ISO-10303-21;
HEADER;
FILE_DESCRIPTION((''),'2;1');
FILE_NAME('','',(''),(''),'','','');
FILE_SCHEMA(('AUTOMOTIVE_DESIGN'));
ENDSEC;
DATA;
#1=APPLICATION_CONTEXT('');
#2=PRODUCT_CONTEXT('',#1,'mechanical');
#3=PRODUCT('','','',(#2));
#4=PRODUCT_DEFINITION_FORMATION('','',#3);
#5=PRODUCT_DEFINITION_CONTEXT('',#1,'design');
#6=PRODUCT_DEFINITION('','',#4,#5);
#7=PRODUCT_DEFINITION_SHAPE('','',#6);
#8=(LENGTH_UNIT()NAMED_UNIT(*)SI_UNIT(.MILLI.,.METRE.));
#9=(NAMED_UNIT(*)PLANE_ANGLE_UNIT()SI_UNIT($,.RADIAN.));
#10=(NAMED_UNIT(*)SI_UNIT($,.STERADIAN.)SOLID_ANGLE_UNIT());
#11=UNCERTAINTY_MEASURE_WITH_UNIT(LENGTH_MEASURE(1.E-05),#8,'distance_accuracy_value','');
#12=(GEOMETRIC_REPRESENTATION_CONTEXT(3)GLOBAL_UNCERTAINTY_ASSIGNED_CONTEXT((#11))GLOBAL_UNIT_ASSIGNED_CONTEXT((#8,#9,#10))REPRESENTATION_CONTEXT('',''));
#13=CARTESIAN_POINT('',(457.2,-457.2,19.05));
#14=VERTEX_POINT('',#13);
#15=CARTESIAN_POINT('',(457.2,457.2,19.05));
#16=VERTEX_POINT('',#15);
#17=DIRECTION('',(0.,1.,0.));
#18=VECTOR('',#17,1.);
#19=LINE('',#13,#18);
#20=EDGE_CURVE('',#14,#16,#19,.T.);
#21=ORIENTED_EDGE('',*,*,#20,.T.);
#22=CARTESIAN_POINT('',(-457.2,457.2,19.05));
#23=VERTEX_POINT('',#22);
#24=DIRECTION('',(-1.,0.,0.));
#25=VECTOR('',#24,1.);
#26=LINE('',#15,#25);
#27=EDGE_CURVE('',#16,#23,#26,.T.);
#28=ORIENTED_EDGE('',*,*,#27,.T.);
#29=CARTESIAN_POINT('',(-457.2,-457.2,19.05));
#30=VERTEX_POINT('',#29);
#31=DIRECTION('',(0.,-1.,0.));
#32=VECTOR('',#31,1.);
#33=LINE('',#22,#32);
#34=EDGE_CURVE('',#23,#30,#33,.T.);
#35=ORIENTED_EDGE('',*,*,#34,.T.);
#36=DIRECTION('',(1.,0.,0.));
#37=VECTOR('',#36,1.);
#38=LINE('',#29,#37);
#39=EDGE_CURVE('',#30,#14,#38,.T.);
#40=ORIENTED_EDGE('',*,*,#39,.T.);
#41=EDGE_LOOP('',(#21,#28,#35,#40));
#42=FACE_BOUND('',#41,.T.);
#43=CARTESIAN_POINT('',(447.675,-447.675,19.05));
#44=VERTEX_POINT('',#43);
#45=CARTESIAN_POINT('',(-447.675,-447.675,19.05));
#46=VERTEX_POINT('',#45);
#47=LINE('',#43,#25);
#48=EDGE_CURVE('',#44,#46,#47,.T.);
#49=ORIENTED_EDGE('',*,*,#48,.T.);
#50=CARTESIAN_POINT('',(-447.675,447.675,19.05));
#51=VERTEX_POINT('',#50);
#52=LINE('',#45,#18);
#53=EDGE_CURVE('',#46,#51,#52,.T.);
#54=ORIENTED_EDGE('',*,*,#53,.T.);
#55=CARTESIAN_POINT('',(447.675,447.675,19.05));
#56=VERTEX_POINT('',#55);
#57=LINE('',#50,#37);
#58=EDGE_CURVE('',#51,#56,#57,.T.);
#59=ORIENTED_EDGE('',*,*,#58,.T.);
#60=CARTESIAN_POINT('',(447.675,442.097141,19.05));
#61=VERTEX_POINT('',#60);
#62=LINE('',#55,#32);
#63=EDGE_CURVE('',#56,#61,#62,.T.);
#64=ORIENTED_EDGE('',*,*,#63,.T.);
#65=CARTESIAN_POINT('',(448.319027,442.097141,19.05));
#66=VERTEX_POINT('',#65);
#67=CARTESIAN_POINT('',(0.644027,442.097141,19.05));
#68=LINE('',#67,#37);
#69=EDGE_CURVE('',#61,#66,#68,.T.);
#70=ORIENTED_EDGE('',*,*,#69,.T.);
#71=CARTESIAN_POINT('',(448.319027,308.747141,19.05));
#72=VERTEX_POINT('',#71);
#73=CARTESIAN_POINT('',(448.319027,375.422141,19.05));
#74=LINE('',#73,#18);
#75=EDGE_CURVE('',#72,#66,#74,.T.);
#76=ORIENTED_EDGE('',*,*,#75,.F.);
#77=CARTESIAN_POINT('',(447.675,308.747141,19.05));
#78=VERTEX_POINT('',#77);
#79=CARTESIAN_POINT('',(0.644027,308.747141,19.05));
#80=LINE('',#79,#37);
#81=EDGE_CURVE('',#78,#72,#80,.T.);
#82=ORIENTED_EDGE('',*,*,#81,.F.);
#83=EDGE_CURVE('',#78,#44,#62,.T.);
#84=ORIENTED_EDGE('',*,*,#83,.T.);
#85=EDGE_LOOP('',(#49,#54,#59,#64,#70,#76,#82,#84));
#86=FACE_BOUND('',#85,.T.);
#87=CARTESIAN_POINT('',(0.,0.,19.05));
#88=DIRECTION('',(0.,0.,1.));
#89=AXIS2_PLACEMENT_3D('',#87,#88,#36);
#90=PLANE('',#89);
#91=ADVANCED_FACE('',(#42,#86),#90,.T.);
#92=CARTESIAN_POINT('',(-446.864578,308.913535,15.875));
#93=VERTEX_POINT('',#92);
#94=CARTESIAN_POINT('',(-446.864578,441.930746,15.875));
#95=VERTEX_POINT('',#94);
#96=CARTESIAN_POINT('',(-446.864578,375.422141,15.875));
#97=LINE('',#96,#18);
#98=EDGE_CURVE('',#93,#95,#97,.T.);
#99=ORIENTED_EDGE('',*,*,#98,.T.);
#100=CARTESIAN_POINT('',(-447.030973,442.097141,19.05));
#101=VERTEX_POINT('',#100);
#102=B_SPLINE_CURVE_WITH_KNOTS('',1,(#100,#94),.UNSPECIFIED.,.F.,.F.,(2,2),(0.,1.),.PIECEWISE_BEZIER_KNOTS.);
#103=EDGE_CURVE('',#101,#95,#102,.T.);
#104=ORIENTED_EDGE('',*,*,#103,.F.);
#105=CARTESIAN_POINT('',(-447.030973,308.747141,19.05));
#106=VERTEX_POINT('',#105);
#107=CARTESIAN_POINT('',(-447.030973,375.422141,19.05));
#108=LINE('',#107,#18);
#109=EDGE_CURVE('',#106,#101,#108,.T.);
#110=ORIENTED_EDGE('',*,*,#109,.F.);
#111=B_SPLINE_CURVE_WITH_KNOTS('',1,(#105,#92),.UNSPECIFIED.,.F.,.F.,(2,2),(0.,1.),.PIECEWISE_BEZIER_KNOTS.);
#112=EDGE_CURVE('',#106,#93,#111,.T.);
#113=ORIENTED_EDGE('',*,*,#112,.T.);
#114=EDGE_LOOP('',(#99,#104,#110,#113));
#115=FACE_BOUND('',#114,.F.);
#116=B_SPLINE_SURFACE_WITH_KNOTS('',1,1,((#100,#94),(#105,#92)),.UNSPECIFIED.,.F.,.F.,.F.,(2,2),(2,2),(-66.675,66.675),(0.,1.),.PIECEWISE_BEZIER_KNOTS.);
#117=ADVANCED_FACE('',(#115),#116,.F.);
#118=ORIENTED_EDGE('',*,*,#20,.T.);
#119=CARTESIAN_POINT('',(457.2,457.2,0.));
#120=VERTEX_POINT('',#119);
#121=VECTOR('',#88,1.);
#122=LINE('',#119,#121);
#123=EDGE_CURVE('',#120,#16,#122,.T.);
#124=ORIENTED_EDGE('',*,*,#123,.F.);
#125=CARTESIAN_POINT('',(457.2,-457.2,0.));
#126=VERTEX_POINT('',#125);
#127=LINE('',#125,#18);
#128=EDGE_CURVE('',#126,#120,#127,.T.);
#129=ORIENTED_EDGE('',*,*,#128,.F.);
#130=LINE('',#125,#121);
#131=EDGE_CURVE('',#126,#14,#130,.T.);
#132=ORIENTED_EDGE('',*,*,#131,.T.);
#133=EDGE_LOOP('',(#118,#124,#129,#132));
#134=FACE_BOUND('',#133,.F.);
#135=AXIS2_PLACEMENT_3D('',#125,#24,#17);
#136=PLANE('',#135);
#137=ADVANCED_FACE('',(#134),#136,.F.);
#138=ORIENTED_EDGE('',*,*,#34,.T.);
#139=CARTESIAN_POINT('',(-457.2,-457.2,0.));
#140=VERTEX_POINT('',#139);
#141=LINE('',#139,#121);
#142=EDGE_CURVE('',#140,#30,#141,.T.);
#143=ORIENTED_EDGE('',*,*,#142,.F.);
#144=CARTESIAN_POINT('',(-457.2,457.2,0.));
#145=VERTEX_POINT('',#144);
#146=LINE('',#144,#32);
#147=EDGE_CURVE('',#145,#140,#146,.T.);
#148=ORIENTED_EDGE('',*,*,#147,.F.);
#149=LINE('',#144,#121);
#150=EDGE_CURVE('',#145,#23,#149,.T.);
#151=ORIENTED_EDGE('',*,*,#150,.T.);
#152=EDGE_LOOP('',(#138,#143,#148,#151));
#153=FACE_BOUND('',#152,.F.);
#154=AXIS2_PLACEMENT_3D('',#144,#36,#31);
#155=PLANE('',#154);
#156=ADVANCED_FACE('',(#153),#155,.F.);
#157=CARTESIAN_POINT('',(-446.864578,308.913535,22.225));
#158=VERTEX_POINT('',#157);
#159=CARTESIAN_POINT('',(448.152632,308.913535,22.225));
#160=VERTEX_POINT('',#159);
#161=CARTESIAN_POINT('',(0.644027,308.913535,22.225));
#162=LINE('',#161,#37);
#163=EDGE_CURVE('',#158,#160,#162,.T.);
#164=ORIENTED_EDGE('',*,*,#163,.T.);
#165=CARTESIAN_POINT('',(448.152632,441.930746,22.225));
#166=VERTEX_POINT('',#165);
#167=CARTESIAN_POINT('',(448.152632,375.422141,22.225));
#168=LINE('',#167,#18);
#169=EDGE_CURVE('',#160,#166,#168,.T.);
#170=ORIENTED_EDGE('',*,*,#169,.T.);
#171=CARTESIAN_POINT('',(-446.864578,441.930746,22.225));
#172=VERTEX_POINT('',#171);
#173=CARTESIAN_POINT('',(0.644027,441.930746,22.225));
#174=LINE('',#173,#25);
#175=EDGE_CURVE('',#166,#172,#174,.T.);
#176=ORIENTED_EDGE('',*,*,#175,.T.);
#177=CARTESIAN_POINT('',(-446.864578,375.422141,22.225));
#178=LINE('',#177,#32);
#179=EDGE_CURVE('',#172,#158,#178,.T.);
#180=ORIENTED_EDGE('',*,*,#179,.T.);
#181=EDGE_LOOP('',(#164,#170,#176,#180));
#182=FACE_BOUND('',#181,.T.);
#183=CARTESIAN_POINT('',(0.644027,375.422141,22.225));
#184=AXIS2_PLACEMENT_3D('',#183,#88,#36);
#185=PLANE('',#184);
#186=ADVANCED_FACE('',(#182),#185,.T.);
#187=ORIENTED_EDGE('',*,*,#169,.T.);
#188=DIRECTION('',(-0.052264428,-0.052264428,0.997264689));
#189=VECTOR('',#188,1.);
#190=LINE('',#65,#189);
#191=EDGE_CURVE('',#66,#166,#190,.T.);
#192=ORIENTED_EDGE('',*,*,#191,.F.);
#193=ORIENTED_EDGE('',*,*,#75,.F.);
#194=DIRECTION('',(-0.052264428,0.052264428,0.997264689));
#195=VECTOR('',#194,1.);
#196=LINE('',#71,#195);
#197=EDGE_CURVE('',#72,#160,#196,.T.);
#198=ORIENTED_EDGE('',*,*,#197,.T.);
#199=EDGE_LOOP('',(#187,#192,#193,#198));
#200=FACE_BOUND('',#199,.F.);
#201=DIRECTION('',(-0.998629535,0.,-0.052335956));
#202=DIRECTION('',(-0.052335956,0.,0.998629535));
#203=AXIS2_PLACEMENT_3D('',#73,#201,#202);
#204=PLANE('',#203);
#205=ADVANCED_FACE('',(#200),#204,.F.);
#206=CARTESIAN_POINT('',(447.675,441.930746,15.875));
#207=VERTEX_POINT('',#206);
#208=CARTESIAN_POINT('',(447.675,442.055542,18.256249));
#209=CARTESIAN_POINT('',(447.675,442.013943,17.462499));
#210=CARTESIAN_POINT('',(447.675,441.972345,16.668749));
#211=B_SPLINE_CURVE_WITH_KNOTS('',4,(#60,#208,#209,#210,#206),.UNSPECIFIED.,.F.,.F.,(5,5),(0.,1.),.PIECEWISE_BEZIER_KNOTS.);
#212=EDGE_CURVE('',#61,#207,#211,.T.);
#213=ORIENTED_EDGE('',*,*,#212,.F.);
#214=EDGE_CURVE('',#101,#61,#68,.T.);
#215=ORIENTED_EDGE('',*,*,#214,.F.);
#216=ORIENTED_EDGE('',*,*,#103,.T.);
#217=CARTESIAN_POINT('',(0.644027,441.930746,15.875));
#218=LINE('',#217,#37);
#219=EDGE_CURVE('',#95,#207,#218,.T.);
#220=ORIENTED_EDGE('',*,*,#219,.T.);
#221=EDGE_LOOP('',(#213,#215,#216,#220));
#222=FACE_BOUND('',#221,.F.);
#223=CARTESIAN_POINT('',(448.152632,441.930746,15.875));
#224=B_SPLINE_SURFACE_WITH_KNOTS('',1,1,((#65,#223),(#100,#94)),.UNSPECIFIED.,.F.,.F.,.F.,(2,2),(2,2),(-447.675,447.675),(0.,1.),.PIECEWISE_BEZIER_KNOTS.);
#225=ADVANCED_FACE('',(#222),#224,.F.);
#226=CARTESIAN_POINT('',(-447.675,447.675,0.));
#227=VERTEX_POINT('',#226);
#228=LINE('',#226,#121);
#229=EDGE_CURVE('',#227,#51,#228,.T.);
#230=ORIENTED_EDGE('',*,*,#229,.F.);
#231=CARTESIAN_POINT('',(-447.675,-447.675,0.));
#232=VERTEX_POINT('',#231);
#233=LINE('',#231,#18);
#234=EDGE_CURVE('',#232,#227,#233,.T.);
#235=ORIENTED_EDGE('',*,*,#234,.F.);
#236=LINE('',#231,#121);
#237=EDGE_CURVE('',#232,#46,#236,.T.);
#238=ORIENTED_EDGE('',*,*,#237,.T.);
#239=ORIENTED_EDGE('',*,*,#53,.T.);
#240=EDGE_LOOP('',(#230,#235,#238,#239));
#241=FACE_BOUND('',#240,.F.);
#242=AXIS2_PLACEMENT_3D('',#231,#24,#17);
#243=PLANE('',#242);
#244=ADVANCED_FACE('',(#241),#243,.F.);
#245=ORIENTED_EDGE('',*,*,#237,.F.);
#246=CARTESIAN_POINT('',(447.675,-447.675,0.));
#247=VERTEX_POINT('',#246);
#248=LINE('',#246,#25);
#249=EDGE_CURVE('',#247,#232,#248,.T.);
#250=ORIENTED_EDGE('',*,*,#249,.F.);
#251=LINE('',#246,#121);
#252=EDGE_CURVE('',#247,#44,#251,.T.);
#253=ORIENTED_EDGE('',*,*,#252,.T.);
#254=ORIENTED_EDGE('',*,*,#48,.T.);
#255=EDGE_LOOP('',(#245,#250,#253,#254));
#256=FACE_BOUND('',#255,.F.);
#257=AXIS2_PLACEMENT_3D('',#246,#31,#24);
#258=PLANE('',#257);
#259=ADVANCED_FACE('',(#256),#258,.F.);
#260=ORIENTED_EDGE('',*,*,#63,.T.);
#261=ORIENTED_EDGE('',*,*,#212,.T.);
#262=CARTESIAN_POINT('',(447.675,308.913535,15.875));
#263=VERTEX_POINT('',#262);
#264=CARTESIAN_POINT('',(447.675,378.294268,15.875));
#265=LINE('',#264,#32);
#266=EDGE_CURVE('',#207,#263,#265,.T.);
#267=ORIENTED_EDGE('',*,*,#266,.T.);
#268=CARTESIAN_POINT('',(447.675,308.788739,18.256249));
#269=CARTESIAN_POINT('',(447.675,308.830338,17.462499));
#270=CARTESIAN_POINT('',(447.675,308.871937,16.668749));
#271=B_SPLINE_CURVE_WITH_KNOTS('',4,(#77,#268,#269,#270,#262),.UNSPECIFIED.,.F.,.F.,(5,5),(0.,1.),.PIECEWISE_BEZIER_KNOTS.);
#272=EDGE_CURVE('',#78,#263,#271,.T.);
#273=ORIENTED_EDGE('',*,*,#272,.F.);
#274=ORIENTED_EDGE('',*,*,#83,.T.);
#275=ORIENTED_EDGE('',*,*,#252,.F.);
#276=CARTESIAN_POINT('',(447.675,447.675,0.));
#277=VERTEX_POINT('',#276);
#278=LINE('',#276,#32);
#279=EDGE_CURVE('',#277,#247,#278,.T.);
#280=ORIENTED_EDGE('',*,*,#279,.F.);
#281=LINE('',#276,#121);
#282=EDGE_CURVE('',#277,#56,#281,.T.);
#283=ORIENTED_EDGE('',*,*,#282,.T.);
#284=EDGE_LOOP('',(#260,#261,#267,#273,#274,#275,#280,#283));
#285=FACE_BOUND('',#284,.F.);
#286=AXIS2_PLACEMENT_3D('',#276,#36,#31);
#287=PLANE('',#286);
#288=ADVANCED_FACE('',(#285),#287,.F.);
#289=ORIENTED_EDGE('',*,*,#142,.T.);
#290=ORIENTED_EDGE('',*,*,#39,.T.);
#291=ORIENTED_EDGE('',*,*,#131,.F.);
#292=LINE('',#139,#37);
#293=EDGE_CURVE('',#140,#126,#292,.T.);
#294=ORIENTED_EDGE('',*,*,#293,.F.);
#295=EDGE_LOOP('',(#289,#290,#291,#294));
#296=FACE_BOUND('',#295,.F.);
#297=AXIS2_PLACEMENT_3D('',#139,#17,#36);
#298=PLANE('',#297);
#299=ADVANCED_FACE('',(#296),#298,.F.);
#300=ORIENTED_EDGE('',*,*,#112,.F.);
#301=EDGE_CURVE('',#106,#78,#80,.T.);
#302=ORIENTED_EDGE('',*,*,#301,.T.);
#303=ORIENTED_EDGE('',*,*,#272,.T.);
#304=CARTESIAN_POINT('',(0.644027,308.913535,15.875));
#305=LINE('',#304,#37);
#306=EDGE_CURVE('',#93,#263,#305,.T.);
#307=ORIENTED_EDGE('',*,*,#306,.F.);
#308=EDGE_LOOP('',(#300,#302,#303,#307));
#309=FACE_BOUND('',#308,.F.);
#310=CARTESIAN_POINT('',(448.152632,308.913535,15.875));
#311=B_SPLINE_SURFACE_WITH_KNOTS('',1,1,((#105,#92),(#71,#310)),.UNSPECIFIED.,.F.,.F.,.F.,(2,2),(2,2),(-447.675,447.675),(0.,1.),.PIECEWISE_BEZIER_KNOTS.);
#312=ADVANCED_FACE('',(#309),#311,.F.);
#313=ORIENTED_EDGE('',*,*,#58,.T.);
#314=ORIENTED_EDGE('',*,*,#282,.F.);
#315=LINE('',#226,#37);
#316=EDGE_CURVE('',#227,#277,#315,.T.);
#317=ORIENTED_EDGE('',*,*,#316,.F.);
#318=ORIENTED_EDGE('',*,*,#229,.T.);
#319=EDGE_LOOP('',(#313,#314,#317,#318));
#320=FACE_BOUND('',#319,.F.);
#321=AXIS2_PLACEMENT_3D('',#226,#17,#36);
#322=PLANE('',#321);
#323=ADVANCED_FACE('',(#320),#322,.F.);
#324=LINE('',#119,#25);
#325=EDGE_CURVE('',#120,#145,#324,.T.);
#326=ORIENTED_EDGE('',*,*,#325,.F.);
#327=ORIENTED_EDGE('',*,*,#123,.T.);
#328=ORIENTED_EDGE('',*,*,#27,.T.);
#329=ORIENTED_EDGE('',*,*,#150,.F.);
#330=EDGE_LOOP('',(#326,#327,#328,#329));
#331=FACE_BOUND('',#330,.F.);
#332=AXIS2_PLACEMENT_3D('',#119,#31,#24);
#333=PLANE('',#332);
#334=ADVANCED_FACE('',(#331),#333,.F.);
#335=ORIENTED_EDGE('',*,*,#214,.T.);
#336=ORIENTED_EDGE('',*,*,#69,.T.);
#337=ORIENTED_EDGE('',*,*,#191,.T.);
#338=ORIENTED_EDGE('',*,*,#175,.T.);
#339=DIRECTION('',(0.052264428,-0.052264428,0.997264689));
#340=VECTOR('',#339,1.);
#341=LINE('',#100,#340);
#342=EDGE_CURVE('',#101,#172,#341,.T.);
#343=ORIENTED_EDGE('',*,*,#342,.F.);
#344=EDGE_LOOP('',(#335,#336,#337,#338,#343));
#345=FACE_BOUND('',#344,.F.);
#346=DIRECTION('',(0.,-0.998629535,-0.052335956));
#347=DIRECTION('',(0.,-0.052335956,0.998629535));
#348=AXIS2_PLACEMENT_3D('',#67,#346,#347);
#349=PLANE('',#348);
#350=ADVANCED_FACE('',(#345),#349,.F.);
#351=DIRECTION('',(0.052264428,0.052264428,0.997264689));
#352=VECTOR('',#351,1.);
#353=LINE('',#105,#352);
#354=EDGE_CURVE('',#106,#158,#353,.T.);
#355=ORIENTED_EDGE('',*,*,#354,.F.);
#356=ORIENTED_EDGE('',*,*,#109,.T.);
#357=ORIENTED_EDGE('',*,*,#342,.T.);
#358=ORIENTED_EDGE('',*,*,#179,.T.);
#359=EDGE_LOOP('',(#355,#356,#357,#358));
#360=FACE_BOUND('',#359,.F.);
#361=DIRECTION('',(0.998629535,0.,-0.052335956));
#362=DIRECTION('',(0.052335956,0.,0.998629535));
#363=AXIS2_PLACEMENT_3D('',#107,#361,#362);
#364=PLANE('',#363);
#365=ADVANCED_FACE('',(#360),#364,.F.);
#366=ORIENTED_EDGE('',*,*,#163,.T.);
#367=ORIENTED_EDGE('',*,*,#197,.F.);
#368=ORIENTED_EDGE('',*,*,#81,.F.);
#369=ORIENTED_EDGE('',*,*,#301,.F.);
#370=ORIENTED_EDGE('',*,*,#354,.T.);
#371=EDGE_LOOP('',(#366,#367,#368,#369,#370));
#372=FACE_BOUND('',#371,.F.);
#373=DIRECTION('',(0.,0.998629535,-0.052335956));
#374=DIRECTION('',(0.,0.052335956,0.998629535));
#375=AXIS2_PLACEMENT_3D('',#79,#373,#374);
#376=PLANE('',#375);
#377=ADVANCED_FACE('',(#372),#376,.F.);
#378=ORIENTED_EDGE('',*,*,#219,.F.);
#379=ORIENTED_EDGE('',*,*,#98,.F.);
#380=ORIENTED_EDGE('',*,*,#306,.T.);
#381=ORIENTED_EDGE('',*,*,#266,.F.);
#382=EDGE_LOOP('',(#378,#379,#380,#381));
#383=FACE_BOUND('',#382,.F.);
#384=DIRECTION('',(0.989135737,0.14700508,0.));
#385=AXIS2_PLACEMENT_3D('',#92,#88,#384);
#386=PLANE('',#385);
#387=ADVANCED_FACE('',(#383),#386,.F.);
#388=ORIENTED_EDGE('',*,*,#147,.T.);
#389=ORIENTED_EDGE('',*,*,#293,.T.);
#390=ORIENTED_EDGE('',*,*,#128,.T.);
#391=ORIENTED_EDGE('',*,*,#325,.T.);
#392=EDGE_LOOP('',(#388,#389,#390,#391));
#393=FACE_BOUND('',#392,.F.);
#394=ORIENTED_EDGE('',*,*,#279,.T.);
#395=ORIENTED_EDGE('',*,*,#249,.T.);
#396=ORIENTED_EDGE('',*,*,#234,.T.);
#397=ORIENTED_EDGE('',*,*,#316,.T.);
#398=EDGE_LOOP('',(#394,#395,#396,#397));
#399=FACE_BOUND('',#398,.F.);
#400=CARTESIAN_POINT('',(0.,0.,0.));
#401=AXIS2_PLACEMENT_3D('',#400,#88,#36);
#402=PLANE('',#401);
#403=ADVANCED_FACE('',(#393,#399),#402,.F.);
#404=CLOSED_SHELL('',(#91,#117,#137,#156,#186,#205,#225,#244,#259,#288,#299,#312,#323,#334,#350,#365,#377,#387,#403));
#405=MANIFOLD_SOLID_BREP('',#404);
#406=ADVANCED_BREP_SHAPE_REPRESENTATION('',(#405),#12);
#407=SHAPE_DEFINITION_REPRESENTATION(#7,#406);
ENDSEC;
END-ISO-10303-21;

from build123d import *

# Parameters (mm, degrees)
F1_DEPTH  = 19.05
F2_W      = 895.35
F2_H      = 19.05
F5_DEPTH  = 19.05
F6_DEPTH  = 38.1
F3_W      = 895.35
F3_H      = 19.05
F7_DEPTH  = 19.05
F4_W      = 895.35
F4_H      = 19.05
F8_DEPTH  = 127
F10_W     = 895.35
F10_H     = 19.05
F11_DEPTH = 19.05
F12_W     = 895.35
F12_H     = 133.35
F13_DEPTH = 3.175
F13_TAPER = 3


# Not quite as in the source:
# - the program builds the solid bodies; features that only make, move or delete a surface that nothing else refers to are left out


with BuildPart() as f1:
    # F0 (on Top) → F1 (new body)
    with BuildSketch(Plane.XY):
        Polygon((457.2, -457.2), (457.2, 457.2), (186.2517595291, 457.2), (-457.2, 457.2), (-457.2, -457.2), align=None)
        Polygon((-447.675, 447.675), (186.2517595291, 447.675), (447.675, 447.675), (447.675, -447.675), (-447.675, -447.675), align=None, mode=Mode.SUBTRACT)
    extrude(amount=F1_DEPTH)

    # F3 (on face) → F7 (cut)
    with BuildSketch(Plane.XY.offset(19.05)):
        with Locations((0, 298.0556269322)):
            Rectangle(F3_W, F3_H)
    extrude(amount=-F7_DEPTH, mode=Mode.SUBTRACT)

    # F4 (on face) → F8 (cut)
    with BuildSketch(Plane.XY.offset(19.05)):
        with Locations((0, 298.0556269322)):
            Rectangle(F4_W, F4_H)
    extrude(amount=-F8_DEPTH, mode=Mode.SUBTRACT)

    # F10 (on face) → F11 (cut)
    with BuildSketch(Plane.XY.offset(19.05)):
        with Locations((0, 298.0556269322)):
            Rectangle(F10_W, F10_H)
    extrude(amount=-F11_DEPTH, mode=Mode.SUBTRACT)

    # F12 (on face) → F13 (join, symmetric)
    with BuildSketch(Plane.XY.offset(19.05)):
        with Locations((0.6440271378, 375.4221406161)):
            Rectangle(F12_W, F12_H)
    extrude(amount=F13_DEPTH, both=True, taper=F13_TAPER)


with BuildPart() as f5:
    # F2 (on face) → F5 (new body)
    with BuildSketch(Plane.XY.offset(19.05)):
        with Locations((0, 298.0556269322)):
            Rectangle(F2_W, F2_H)
    extrude(amount=F5_DEPTH)

    # F6 (cut): a face of the model
    f6_faces = [f5.faces().sort_by_distance(p)[0] for p in [
        (0, 298.0556269322, 38.1),
    ]]
    extrude(f6_faces, amount=-F6_DEPTH, mode=Mode.SUBTRACT)


solid = f1.part
